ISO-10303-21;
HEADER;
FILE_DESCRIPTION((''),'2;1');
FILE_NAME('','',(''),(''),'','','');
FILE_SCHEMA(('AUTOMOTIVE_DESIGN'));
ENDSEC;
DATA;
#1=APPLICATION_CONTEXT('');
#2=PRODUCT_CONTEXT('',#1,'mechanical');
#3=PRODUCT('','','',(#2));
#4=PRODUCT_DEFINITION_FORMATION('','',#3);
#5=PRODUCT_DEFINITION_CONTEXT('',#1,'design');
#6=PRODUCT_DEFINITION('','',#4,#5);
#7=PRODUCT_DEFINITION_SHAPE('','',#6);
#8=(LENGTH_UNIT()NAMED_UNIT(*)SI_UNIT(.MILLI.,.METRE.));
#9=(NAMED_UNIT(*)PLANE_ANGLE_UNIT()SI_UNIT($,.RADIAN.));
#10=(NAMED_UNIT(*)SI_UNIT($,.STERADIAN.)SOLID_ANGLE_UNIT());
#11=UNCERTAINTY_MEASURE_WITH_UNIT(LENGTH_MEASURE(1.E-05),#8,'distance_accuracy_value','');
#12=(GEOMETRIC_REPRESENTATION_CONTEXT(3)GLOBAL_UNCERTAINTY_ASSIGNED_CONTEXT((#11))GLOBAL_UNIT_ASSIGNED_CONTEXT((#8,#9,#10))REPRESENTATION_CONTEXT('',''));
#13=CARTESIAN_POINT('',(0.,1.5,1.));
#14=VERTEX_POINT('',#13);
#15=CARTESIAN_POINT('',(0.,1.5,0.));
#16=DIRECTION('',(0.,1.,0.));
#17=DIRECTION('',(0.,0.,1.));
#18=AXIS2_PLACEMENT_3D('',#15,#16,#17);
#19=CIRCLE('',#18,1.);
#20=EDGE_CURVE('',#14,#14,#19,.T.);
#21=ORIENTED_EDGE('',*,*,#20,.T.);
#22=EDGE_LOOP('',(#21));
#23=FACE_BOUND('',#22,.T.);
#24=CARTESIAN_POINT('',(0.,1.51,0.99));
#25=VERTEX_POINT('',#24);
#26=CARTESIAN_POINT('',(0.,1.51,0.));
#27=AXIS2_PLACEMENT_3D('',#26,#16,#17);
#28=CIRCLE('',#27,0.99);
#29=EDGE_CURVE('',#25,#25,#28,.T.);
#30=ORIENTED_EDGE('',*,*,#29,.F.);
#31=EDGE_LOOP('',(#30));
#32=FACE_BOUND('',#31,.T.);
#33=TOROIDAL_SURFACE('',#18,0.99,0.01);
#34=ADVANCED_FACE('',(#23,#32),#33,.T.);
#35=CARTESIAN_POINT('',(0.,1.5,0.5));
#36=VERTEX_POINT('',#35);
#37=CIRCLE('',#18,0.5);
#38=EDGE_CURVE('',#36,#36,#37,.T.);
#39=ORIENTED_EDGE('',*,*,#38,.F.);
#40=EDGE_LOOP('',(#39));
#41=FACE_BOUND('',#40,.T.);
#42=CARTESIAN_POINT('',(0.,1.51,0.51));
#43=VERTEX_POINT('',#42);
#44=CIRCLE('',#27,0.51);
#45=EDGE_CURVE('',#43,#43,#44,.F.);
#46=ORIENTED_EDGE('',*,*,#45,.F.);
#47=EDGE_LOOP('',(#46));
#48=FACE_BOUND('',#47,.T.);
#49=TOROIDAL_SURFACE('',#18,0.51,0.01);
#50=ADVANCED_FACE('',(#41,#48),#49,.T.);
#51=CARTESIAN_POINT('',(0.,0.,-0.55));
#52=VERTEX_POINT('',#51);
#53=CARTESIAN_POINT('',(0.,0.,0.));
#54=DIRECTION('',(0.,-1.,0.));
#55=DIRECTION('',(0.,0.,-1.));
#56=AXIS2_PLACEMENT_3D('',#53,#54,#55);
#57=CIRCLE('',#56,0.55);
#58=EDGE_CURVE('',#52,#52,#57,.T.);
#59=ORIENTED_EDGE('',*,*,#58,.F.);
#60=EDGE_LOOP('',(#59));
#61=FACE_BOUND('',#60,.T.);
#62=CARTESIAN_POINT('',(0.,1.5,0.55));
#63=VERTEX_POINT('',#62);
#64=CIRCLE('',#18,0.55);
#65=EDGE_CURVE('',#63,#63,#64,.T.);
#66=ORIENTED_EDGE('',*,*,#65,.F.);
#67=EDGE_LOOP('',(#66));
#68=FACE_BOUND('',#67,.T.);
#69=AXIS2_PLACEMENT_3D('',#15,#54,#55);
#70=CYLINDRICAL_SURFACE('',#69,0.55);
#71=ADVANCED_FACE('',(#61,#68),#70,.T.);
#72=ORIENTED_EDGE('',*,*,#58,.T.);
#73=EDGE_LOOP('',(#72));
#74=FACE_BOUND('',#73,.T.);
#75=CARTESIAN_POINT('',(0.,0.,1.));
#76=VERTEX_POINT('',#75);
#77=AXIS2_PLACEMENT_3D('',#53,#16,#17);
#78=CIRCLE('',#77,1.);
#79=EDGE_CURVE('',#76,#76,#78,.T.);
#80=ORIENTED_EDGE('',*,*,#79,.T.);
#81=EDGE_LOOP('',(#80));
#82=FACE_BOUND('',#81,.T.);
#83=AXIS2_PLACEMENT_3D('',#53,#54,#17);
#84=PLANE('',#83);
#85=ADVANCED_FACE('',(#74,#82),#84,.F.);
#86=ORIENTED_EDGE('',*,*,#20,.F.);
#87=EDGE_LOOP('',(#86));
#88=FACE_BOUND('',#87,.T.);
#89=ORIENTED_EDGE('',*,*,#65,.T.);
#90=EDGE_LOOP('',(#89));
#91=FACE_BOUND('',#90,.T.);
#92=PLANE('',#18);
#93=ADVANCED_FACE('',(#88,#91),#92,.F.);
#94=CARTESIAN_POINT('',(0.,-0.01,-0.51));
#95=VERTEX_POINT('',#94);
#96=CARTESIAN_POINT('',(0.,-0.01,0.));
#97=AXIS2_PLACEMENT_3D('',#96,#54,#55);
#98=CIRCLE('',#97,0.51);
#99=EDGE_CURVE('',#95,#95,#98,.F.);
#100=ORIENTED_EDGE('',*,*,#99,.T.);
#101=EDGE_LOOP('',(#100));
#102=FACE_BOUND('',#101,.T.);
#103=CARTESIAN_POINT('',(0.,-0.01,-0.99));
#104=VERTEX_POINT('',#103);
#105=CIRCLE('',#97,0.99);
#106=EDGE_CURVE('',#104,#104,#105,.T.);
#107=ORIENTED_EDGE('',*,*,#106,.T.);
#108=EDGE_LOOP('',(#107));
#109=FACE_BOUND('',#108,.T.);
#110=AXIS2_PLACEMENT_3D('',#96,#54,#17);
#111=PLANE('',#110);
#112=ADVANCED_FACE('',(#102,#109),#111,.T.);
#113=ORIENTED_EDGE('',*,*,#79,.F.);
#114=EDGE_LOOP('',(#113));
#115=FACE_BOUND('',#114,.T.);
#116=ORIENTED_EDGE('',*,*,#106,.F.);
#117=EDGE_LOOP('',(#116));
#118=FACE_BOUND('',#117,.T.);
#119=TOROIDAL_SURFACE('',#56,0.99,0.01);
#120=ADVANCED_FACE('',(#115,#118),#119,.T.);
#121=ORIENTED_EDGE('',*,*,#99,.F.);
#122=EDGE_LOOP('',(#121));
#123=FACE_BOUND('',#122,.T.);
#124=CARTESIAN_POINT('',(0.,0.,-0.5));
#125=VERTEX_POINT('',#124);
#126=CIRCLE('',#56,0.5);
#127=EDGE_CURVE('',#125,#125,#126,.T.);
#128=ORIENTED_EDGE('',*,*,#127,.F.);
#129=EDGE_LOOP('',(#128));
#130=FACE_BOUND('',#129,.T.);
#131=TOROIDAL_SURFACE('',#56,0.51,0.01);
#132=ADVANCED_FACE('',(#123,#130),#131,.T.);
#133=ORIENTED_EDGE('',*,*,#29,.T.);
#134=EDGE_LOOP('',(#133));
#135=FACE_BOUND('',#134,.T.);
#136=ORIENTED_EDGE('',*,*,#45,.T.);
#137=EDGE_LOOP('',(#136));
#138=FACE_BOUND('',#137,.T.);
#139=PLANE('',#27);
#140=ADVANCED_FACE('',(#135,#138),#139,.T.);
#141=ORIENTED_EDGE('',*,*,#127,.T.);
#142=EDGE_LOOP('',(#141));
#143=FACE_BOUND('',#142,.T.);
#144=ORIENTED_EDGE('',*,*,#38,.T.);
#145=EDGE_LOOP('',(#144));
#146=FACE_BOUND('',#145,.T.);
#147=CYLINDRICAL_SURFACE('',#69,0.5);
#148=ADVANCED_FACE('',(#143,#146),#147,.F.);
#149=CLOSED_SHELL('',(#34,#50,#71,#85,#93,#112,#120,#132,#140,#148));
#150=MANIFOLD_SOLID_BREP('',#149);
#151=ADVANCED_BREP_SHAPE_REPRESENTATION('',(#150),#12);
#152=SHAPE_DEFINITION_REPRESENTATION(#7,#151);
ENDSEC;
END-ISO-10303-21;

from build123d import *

# Parameters (mm, degrees)
SKETCH1_R            = 0.55
SKETCH1_R_2          = 0.5
BOSS_EXTRUDE1_DEPTH  = 1.5
SKETCH2_R            = 1
SKETCH2_R_2          = 0.5
BOSS_EXTRUDE2_DEPTH  = 0.01
FILLET1_R            = 0.01
FILLET1_OF_MIRROR1_R = 0.01


with BuildPart() as part:
    # Sketch1 → Boss-Extrude1 (new body)
    with BuildSketch(Plane(origin=(0, 0, 0), x_dir=(1, 0, 0), z_dir=(0, 1, 0))):
        with Locations(Location((0, 0, 0), (0, 0, 270))):
            Circle(SKETCH1_R)
        with Locations(Location((0, 0, 0), (0, 0, 270))):
            Circle(SKETCH1_R_2, mode=Mode.SUBTRACT)
    extrude(amount=BOSS_EXTRUDE1_DEPTH)

    # Sketch2 → Boss-Extrude2 (add)
    with BuildSketch(Plane(origin=(0, 1.5, 0), x_dir=(1, 0, 0), z_dir=(0, 1, 0))):
        with Locations(Location((0, 0, 0), (0, 0, 90))):
            Circle(SKETCH2_R)
        with Locations(Location((0, 0, 0), (0, 0, 270))):
            Circle(SKETCH2_R_2, mode=Mode.SUBTRACT)
    boss_extrude2 = extrude(amount=BOSS_EXTRUDE2_DEPTH)

    # Fillet1
    fillet1_edges = [part.edges().sort_by_distance(p)[0] for p in [
        (0, 1.51, 1),
        (0, 1.51, -0.5),
    ]]
    fillet(fillet1_edges, radius=FILLET1_R - 0.0001)  # a hair under: the kernel refuses the full size

    # Mirror1: Boss-Extrude2 across plane
    add(boss_extrude2.mirror(Plane.ZX.offset(0.75)))

    # Fillet1 of Mirror1
    fillet1_of_mirror1_edges = [part.edges().sort_by_distance(p)[0] for p in [
        (0, -0.01, 1),
        (0, -0.01, -0.5),
    ]]
    fillet(fillet1_of_mirror1_edges, radius=FILLET1_OF_MIRROR1_R - 0.0001)  # a hair under: the kernel refuses the full size


solid = part.part
